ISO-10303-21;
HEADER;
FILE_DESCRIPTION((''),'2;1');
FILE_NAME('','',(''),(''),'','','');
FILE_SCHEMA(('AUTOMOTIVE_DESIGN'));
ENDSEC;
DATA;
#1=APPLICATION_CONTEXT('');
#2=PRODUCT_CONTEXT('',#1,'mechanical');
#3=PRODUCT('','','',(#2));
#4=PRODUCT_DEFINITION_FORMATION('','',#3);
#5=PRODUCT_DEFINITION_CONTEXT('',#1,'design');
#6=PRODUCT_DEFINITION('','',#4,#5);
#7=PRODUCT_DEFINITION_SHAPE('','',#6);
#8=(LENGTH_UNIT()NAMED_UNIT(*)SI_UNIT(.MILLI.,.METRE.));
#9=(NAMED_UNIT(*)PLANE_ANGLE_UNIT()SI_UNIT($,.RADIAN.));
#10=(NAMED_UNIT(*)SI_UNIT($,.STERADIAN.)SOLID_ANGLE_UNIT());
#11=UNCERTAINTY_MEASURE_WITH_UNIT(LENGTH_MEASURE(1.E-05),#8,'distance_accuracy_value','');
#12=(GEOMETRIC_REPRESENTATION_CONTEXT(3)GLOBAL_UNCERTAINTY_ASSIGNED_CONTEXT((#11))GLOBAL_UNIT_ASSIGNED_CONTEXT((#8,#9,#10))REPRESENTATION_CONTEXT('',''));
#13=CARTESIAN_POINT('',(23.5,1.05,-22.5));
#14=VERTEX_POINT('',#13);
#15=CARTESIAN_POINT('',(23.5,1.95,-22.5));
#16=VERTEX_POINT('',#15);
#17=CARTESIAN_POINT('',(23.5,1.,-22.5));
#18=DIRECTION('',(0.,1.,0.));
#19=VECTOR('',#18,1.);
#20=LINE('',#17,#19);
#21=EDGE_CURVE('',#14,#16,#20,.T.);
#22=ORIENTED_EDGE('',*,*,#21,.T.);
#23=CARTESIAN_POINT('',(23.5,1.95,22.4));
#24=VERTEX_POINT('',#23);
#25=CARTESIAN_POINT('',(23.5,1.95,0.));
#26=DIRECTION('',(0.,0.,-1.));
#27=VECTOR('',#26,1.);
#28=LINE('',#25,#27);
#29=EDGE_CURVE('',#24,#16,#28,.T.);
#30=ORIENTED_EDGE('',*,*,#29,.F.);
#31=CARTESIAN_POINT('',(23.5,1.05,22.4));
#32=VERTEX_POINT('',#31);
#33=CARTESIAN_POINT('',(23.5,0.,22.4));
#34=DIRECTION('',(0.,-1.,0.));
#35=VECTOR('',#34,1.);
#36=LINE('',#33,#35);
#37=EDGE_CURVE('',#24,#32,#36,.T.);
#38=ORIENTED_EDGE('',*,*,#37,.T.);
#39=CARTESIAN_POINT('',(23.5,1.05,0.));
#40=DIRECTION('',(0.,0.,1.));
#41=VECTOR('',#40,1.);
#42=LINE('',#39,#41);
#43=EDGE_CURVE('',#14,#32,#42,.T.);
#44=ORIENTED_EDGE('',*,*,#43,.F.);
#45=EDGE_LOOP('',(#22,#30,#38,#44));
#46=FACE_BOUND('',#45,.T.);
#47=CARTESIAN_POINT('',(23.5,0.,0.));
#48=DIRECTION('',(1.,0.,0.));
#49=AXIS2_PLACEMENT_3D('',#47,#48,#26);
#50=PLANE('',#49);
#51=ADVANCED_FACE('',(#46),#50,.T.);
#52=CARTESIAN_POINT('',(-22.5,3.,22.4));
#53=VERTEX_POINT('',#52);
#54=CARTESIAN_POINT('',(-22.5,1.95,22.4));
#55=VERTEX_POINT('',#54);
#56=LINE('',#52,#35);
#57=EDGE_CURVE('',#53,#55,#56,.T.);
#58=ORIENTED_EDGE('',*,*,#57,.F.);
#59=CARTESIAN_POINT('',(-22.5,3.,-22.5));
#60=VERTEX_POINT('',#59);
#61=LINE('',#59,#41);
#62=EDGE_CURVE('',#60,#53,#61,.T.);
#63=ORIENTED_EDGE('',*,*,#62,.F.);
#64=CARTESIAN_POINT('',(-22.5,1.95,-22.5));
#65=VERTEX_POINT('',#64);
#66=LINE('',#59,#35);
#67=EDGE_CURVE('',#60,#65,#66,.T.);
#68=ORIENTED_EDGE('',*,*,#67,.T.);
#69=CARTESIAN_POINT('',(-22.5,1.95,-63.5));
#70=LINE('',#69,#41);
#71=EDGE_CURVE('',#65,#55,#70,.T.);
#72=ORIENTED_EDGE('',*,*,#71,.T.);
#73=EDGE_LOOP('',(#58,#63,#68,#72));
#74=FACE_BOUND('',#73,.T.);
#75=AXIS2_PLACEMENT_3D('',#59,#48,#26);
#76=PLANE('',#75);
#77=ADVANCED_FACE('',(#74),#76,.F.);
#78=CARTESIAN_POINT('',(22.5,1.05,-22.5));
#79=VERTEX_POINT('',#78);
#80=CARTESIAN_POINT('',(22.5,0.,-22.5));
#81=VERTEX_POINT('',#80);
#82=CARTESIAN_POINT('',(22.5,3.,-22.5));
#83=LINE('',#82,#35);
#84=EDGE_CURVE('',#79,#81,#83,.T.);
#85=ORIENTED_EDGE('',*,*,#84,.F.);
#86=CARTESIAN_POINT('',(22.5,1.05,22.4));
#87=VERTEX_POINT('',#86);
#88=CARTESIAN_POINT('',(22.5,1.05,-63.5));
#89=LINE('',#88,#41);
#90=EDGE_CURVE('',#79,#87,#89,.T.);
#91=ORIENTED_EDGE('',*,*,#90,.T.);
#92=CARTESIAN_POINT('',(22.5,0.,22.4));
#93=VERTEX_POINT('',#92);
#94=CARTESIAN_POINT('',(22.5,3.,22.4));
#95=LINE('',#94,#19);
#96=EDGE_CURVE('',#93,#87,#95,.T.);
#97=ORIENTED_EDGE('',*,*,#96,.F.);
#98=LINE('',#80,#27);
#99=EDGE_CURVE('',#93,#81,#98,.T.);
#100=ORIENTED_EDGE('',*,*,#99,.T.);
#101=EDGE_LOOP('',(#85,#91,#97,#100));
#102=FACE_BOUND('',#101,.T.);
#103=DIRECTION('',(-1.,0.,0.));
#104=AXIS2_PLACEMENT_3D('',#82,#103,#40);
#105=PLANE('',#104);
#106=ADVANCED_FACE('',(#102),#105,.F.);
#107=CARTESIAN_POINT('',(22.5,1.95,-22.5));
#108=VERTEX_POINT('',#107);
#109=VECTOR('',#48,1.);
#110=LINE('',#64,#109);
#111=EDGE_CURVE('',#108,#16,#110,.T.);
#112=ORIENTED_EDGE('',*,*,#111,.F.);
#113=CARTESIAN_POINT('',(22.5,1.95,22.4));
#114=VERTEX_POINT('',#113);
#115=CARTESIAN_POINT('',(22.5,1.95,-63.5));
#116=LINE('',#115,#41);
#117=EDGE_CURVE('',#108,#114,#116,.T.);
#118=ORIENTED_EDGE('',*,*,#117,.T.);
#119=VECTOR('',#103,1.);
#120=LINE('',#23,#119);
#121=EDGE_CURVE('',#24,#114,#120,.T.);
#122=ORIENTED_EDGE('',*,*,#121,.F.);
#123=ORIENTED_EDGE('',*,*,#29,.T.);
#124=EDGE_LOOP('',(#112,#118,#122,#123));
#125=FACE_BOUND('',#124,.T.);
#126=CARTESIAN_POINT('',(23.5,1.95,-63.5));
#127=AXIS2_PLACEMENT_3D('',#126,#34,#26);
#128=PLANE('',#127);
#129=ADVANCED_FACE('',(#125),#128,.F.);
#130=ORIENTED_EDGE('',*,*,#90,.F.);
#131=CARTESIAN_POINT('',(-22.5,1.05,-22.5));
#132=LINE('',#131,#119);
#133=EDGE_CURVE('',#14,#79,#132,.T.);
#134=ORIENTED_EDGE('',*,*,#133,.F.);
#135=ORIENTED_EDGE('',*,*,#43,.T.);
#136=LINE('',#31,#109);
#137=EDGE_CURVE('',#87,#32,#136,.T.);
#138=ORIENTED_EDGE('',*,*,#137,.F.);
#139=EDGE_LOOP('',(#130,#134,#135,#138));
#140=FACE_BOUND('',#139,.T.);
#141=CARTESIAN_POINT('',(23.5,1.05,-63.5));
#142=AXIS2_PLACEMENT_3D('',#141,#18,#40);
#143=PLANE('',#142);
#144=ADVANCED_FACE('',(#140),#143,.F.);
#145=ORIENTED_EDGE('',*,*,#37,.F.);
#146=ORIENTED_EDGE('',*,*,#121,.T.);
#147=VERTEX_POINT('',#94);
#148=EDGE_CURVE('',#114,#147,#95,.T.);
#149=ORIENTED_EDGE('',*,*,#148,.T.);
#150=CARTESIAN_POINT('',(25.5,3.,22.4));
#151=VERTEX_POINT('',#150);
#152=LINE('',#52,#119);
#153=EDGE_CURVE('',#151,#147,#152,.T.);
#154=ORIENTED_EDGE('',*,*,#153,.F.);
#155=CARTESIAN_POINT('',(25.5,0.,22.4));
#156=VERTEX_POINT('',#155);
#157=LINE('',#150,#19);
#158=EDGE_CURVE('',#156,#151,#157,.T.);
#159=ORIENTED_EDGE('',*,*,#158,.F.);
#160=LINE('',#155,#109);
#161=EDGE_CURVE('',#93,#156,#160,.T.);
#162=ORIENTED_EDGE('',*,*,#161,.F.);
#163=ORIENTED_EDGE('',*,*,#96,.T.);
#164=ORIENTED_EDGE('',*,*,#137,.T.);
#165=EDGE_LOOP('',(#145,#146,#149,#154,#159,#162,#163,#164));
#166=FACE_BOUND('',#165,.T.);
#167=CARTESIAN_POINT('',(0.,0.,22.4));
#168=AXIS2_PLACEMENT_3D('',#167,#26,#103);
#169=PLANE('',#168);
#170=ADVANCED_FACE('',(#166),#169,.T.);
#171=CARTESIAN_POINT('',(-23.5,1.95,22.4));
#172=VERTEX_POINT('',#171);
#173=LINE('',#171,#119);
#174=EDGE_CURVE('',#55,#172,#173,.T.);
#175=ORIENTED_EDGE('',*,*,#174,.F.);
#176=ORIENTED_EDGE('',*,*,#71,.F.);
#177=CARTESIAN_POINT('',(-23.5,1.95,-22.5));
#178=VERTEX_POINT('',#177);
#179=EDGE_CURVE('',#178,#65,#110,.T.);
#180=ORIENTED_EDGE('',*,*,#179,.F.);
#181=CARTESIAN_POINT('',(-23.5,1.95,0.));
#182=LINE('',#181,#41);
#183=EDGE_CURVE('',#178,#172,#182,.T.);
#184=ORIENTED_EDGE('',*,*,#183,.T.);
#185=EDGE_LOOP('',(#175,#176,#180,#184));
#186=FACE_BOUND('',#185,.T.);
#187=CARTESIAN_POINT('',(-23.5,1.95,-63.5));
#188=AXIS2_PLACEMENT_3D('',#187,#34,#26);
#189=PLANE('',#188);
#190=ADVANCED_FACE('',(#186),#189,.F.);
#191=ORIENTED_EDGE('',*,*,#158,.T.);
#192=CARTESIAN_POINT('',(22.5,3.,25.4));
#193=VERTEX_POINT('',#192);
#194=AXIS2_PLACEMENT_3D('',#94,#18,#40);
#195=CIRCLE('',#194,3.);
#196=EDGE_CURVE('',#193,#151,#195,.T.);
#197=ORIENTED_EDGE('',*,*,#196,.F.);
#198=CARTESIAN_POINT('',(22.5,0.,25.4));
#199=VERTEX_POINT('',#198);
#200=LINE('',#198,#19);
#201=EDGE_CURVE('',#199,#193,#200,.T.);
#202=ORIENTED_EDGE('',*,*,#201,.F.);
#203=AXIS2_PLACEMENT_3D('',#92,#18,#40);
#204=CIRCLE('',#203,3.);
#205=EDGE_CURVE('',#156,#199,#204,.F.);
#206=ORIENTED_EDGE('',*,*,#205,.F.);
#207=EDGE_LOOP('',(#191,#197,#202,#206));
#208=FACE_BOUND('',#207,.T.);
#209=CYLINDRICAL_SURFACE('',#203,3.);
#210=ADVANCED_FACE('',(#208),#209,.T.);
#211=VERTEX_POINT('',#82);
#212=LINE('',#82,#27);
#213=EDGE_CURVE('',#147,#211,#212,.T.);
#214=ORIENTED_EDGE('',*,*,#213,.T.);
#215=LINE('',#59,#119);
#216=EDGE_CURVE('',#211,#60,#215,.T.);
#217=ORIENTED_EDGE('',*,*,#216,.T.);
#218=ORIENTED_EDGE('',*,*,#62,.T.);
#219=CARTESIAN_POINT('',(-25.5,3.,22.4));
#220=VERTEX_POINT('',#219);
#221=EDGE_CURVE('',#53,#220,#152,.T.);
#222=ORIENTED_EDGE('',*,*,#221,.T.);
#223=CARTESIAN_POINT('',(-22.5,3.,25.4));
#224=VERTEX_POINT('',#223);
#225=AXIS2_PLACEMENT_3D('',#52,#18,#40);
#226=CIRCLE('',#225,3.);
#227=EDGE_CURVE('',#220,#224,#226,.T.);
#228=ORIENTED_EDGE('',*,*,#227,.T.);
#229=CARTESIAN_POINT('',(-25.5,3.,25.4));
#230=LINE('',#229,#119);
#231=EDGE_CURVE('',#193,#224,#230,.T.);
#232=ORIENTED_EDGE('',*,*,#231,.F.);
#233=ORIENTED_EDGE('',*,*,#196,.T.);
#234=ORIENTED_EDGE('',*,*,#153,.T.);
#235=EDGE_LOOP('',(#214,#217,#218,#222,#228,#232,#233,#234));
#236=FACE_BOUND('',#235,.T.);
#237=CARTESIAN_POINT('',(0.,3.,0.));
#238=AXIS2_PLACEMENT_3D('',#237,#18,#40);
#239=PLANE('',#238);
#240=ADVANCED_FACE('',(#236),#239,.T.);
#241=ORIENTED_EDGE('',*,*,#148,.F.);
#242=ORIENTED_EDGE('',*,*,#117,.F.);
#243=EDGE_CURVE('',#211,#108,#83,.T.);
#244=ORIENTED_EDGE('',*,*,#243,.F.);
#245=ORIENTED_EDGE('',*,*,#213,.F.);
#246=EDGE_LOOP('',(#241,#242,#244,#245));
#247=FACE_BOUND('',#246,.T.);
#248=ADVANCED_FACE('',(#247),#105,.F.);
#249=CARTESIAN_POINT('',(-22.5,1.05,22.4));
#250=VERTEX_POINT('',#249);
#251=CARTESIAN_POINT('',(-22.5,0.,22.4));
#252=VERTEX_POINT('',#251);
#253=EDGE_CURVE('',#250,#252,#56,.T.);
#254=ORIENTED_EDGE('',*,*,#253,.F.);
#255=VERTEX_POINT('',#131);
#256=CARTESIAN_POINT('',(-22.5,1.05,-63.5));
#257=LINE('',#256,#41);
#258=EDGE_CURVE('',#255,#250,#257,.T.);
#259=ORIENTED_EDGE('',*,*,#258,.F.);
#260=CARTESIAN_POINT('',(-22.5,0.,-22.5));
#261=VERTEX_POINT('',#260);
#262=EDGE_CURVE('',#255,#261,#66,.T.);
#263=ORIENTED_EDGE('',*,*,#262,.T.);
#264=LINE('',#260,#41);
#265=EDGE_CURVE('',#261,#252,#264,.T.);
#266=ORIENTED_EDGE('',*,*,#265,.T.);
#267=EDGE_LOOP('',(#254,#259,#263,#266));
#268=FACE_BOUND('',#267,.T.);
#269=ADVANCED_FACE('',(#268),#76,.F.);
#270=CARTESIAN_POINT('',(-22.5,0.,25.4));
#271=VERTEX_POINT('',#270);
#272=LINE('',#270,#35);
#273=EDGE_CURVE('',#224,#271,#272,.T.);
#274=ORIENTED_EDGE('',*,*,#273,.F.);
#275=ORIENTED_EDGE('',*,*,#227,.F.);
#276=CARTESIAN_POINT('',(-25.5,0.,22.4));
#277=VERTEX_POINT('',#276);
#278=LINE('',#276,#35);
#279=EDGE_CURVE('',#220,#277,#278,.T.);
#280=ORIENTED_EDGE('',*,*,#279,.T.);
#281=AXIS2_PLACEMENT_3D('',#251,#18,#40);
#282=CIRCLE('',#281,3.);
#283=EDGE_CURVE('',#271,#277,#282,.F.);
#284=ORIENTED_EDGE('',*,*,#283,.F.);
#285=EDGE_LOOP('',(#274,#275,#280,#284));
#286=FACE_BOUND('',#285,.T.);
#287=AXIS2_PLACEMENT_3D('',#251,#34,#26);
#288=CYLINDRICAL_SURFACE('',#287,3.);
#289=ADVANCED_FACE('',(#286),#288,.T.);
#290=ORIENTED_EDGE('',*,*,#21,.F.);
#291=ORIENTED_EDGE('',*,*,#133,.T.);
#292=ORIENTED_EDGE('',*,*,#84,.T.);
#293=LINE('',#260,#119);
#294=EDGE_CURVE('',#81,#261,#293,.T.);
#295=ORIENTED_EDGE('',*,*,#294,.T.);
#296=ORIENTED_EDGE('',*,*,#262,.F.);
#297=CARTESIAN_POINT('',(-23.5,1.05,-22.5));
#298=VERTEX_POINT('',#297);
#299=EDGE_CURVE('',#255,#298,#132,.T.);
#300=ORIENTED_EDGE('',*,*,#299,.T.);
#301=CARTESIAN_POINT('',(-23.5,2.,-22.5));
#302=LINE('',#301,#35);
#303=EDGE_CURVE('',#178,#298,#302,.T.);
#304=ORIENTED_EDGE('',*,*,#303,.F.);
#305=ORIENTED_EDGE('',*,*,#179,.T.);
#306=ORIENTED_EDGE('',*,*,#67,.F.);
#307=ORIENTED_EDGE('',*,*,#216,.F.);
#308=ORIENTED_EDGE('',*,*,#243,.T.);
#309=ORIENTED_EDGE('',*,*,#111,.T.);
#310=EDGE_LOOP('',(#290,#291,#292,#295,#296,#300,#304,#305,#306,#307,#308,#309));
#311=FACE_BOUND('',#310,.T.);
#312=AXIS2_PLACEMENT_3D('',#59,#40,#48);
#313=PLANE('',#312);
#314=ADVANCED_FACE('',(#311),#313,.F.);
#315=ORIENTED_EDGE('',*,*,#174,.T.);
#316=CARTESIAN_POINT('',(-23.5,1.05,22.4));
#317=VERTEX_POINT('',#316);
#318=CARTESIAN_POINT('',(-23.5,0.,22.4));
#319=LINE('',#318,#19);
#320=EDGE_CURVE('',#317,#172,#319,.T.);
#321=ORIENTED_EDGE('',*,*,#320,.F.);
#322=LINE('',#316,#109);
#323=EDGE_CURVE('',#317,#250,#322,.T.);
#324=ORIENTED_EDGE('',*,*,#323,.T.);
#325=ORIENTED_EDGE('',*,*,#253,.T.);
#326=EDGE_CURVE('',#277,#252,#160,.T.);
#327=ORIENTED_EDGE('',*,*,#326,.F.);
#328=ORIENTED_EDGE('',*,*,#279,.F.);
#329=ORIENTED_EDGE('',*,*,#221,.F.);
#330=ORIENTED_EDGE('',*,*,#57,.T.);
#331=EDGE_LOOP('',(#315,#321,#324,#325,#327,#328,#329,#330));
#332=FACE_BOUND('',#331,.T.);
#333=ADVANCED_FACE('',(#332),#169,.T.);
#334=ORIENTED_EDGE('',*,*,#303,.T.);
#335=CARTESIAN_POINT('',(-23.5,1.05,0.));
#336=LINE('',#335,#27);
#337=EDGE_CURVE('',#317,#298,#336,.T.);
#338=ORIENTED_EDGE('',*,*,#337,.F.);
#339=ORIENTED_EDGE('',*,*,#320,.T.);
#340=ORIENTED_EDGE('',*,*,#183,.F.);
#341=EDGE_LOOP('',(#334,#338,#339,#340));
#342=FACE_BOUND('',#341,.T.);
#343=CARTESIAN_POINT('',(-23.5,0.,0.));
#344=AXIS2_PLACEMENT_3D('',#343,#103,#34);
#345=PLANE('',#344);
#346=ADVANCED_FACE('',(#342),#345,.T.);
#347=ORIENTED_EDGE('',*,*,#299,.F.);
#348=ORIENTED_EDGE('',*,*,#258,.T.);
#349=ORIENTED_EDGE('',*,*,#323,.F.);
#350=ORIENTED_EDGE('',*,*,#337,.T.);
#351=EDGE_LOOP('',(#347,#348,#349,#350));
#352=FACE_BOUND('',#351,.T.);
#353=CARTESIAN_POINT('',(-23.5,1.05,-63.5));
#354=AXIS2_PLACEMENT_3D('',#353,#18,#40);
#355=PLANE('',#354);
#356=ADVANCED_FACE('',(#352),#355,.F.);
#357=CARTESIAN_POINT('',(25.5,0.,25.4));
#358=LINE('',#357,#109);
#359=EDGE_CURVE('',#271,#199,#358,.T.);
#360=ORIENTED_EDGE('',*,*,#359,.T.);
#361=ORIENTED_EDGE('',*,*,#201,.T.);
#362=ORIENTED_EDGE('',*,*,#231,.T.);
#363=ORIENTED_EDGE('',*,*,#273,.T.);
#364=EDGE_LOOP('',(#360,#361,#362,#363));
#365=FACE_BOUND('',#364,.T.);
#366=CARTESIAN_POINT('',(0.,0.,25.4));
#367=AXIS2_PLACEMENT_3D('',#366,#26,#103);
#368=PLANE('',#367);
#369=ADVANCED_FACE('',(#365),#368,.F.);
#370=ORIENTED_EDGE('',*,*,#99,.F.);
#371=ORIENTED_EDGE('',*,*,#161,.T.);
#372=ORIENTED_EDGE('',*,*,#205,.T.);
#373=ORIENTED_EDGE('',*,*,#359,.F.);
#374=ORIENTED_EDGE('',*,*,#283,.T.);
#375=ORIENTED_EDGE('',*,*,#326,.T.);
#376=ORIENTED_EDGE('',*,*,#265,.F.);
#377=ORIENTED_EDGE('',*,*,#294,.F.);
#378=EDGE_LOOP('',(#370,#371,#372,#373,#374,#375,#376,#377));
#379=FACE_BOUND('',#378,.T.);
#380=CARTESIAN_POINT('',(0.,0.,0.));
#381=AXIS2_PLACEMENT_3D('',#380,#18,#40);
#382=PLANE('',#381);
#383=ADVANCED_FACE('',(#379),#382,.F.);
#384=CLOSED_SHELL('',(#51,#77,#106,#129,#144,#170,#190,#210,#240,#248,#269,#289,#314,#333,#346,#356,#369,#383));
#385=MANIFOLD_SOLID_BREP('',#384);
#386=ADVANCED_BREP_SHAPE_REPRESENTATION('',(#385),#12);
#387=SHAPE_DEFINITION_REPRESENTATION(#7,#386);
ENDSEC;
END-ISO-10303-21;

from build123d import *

# Parameters (mm, degrees)
SKETCH1_W           = 45
SKETCH1_H           = 45
BOSS_EXTRUDE1_DEPTH = 3
SKETCH29_W          = 45
SKETCH29_H          = 1
BOSS_EXTRUDE2_DEPTH = 1
SKETCH30_W          = 45
SKETCH30_H          = 1
BOSS_EXTRUDE3_DEPTH = 1
CUT_EXTRUDE2_DEPTH  = 1.5
SKETCH32_W          = 12
SKETCH32_H          = 1.5
BOSS_EXTRUDE4_DEPTH = 8
SKETCH33_W          = 1
SKETCH33_H          = 0.05
CUT_EXTRUDE3_DEPTH  = 86
SKETCH34_W          = 52.951386634
SKETCH34_H          = 17.48442651
CUT_EXTRUDE4_DEPTH  = 0.1
BOSS_EXTRUDE5_DEPTH = 3
FILLET1_R           = 3


with BuildPart() as part:
    # Sketch1 → Boss-Extrude1 (new body)
    with BuildSketch(Plane(origin=(0, 0, 0), x_dir=(1, 0, 0), z_dir=(0, 1, 0))):
        Rectangle(SKETCH1_W, SKETCH1_H)
    extrude(amount=BOSS_EXTRUDE1_DEPTH)

    # Sketch29 → Boss-Extrude2 (add)
    with BuildSketch(Plane(origin=(22.5, 0, 0), x_dir=(0, 0, -1), z_dir=(1, 0, 0))):
        with Locations((0, 1.5)):
            Rectangle(SKETCH29_W, SKETCH29_H)
    extrude(amount=BOSS_EXTRUDE2_DEPTH)

    # Sketch30 → Boss-Extrude3 (add)
    with BuildSketch(Plane.ZY.offset(22.5)):
        with Locations((0, 1.5)):
            Rectangle(SKETCH30_W, SKETCH30_H)
    extrude(amount=BOSS_EXTRUDE3_DEPTH)

    # Sketch31 → Cut-Extrude2 (cut)
    with BuildSketch(Plane(origin=(0, 3, 0), x_dir=(1, 0, 0), z_dir=(0, 1, 0))):
        Polygon((-2, -22.5), (-2, -18.5), (-6, -18.5), (-6, -14.5), (6, -14.5), (6, -18.5), (2, -18.5), (2, -22.5), align=None)
    extrude(amount=-CUT_EXTRUDE2_DEPTH, mode=Mode.SUBTRACT)

    # Sketch32 → Boss-Extrude4 (add)
    with BuildSketch(Plane.XY.offset(14.5)):
        with Locations((0, 2.25)):
            Rectangle(SKETCH32_W, SKETCH32_H)
    extrude(amount=BOSS_EXTRUDE4_DEPTH)

    # Sketch33 → Cut-Extrude3 (cut)
    with BuildSketch(Plane.XY.offset(22.5)):
        with Locations((-23, 1.975)):
            Rectangle(SKETCH33_W, SKETCH33_H)
        with Locations((-23, 1.025)):
            Rectangle(SKETCH33_W, SKETCH33_H)
        with Locations((23, 1.025)):
            Rectangle(SKETCH33_W, SKETCH33_H)
        with Locations((23, 1.975)):
            Rectangle(SKETCH33_W, SKETCH33_H)
    extrude(amount=-CUT_EXTRUDE3_DEPTH, mode=Mode.SUBTRACT)

    # Sketch34 → Cut-Extrude4 (cut)
    with BuildSketch(Plane.XY.offset(22.5)):
        Rectangle(SKETCH34_W, SKETCH34_H)
    extrude(amount=-CUT_EXTRUDE4_DEPTH, mode=Mode.SUBTRACT)

    # Sketch35 → Boss-Extrude5 (add)
    with BuildSketch(Plane.XY.offset(22.4)):
        Polygon((-22.5, 3), (25.5, 3), (25.5, 0), (-25.5, 0), (-25.5, 3), align=None)
    extrude(amount=BOSS_EXTRUDE5_DEPTH)

    # Fillet1
    fillet1_edges = [part.edges().sort_by_distance(p)[0] for p in [
        (25.5, 1.5, 25.4),
        (-25.5, 1.5, 25.4),
    ]]
    fillet(fillet1_edges, radius=FILLET1_R - 0.0001)  # a hair under: the kernel refuses the full size


solid = part.part
